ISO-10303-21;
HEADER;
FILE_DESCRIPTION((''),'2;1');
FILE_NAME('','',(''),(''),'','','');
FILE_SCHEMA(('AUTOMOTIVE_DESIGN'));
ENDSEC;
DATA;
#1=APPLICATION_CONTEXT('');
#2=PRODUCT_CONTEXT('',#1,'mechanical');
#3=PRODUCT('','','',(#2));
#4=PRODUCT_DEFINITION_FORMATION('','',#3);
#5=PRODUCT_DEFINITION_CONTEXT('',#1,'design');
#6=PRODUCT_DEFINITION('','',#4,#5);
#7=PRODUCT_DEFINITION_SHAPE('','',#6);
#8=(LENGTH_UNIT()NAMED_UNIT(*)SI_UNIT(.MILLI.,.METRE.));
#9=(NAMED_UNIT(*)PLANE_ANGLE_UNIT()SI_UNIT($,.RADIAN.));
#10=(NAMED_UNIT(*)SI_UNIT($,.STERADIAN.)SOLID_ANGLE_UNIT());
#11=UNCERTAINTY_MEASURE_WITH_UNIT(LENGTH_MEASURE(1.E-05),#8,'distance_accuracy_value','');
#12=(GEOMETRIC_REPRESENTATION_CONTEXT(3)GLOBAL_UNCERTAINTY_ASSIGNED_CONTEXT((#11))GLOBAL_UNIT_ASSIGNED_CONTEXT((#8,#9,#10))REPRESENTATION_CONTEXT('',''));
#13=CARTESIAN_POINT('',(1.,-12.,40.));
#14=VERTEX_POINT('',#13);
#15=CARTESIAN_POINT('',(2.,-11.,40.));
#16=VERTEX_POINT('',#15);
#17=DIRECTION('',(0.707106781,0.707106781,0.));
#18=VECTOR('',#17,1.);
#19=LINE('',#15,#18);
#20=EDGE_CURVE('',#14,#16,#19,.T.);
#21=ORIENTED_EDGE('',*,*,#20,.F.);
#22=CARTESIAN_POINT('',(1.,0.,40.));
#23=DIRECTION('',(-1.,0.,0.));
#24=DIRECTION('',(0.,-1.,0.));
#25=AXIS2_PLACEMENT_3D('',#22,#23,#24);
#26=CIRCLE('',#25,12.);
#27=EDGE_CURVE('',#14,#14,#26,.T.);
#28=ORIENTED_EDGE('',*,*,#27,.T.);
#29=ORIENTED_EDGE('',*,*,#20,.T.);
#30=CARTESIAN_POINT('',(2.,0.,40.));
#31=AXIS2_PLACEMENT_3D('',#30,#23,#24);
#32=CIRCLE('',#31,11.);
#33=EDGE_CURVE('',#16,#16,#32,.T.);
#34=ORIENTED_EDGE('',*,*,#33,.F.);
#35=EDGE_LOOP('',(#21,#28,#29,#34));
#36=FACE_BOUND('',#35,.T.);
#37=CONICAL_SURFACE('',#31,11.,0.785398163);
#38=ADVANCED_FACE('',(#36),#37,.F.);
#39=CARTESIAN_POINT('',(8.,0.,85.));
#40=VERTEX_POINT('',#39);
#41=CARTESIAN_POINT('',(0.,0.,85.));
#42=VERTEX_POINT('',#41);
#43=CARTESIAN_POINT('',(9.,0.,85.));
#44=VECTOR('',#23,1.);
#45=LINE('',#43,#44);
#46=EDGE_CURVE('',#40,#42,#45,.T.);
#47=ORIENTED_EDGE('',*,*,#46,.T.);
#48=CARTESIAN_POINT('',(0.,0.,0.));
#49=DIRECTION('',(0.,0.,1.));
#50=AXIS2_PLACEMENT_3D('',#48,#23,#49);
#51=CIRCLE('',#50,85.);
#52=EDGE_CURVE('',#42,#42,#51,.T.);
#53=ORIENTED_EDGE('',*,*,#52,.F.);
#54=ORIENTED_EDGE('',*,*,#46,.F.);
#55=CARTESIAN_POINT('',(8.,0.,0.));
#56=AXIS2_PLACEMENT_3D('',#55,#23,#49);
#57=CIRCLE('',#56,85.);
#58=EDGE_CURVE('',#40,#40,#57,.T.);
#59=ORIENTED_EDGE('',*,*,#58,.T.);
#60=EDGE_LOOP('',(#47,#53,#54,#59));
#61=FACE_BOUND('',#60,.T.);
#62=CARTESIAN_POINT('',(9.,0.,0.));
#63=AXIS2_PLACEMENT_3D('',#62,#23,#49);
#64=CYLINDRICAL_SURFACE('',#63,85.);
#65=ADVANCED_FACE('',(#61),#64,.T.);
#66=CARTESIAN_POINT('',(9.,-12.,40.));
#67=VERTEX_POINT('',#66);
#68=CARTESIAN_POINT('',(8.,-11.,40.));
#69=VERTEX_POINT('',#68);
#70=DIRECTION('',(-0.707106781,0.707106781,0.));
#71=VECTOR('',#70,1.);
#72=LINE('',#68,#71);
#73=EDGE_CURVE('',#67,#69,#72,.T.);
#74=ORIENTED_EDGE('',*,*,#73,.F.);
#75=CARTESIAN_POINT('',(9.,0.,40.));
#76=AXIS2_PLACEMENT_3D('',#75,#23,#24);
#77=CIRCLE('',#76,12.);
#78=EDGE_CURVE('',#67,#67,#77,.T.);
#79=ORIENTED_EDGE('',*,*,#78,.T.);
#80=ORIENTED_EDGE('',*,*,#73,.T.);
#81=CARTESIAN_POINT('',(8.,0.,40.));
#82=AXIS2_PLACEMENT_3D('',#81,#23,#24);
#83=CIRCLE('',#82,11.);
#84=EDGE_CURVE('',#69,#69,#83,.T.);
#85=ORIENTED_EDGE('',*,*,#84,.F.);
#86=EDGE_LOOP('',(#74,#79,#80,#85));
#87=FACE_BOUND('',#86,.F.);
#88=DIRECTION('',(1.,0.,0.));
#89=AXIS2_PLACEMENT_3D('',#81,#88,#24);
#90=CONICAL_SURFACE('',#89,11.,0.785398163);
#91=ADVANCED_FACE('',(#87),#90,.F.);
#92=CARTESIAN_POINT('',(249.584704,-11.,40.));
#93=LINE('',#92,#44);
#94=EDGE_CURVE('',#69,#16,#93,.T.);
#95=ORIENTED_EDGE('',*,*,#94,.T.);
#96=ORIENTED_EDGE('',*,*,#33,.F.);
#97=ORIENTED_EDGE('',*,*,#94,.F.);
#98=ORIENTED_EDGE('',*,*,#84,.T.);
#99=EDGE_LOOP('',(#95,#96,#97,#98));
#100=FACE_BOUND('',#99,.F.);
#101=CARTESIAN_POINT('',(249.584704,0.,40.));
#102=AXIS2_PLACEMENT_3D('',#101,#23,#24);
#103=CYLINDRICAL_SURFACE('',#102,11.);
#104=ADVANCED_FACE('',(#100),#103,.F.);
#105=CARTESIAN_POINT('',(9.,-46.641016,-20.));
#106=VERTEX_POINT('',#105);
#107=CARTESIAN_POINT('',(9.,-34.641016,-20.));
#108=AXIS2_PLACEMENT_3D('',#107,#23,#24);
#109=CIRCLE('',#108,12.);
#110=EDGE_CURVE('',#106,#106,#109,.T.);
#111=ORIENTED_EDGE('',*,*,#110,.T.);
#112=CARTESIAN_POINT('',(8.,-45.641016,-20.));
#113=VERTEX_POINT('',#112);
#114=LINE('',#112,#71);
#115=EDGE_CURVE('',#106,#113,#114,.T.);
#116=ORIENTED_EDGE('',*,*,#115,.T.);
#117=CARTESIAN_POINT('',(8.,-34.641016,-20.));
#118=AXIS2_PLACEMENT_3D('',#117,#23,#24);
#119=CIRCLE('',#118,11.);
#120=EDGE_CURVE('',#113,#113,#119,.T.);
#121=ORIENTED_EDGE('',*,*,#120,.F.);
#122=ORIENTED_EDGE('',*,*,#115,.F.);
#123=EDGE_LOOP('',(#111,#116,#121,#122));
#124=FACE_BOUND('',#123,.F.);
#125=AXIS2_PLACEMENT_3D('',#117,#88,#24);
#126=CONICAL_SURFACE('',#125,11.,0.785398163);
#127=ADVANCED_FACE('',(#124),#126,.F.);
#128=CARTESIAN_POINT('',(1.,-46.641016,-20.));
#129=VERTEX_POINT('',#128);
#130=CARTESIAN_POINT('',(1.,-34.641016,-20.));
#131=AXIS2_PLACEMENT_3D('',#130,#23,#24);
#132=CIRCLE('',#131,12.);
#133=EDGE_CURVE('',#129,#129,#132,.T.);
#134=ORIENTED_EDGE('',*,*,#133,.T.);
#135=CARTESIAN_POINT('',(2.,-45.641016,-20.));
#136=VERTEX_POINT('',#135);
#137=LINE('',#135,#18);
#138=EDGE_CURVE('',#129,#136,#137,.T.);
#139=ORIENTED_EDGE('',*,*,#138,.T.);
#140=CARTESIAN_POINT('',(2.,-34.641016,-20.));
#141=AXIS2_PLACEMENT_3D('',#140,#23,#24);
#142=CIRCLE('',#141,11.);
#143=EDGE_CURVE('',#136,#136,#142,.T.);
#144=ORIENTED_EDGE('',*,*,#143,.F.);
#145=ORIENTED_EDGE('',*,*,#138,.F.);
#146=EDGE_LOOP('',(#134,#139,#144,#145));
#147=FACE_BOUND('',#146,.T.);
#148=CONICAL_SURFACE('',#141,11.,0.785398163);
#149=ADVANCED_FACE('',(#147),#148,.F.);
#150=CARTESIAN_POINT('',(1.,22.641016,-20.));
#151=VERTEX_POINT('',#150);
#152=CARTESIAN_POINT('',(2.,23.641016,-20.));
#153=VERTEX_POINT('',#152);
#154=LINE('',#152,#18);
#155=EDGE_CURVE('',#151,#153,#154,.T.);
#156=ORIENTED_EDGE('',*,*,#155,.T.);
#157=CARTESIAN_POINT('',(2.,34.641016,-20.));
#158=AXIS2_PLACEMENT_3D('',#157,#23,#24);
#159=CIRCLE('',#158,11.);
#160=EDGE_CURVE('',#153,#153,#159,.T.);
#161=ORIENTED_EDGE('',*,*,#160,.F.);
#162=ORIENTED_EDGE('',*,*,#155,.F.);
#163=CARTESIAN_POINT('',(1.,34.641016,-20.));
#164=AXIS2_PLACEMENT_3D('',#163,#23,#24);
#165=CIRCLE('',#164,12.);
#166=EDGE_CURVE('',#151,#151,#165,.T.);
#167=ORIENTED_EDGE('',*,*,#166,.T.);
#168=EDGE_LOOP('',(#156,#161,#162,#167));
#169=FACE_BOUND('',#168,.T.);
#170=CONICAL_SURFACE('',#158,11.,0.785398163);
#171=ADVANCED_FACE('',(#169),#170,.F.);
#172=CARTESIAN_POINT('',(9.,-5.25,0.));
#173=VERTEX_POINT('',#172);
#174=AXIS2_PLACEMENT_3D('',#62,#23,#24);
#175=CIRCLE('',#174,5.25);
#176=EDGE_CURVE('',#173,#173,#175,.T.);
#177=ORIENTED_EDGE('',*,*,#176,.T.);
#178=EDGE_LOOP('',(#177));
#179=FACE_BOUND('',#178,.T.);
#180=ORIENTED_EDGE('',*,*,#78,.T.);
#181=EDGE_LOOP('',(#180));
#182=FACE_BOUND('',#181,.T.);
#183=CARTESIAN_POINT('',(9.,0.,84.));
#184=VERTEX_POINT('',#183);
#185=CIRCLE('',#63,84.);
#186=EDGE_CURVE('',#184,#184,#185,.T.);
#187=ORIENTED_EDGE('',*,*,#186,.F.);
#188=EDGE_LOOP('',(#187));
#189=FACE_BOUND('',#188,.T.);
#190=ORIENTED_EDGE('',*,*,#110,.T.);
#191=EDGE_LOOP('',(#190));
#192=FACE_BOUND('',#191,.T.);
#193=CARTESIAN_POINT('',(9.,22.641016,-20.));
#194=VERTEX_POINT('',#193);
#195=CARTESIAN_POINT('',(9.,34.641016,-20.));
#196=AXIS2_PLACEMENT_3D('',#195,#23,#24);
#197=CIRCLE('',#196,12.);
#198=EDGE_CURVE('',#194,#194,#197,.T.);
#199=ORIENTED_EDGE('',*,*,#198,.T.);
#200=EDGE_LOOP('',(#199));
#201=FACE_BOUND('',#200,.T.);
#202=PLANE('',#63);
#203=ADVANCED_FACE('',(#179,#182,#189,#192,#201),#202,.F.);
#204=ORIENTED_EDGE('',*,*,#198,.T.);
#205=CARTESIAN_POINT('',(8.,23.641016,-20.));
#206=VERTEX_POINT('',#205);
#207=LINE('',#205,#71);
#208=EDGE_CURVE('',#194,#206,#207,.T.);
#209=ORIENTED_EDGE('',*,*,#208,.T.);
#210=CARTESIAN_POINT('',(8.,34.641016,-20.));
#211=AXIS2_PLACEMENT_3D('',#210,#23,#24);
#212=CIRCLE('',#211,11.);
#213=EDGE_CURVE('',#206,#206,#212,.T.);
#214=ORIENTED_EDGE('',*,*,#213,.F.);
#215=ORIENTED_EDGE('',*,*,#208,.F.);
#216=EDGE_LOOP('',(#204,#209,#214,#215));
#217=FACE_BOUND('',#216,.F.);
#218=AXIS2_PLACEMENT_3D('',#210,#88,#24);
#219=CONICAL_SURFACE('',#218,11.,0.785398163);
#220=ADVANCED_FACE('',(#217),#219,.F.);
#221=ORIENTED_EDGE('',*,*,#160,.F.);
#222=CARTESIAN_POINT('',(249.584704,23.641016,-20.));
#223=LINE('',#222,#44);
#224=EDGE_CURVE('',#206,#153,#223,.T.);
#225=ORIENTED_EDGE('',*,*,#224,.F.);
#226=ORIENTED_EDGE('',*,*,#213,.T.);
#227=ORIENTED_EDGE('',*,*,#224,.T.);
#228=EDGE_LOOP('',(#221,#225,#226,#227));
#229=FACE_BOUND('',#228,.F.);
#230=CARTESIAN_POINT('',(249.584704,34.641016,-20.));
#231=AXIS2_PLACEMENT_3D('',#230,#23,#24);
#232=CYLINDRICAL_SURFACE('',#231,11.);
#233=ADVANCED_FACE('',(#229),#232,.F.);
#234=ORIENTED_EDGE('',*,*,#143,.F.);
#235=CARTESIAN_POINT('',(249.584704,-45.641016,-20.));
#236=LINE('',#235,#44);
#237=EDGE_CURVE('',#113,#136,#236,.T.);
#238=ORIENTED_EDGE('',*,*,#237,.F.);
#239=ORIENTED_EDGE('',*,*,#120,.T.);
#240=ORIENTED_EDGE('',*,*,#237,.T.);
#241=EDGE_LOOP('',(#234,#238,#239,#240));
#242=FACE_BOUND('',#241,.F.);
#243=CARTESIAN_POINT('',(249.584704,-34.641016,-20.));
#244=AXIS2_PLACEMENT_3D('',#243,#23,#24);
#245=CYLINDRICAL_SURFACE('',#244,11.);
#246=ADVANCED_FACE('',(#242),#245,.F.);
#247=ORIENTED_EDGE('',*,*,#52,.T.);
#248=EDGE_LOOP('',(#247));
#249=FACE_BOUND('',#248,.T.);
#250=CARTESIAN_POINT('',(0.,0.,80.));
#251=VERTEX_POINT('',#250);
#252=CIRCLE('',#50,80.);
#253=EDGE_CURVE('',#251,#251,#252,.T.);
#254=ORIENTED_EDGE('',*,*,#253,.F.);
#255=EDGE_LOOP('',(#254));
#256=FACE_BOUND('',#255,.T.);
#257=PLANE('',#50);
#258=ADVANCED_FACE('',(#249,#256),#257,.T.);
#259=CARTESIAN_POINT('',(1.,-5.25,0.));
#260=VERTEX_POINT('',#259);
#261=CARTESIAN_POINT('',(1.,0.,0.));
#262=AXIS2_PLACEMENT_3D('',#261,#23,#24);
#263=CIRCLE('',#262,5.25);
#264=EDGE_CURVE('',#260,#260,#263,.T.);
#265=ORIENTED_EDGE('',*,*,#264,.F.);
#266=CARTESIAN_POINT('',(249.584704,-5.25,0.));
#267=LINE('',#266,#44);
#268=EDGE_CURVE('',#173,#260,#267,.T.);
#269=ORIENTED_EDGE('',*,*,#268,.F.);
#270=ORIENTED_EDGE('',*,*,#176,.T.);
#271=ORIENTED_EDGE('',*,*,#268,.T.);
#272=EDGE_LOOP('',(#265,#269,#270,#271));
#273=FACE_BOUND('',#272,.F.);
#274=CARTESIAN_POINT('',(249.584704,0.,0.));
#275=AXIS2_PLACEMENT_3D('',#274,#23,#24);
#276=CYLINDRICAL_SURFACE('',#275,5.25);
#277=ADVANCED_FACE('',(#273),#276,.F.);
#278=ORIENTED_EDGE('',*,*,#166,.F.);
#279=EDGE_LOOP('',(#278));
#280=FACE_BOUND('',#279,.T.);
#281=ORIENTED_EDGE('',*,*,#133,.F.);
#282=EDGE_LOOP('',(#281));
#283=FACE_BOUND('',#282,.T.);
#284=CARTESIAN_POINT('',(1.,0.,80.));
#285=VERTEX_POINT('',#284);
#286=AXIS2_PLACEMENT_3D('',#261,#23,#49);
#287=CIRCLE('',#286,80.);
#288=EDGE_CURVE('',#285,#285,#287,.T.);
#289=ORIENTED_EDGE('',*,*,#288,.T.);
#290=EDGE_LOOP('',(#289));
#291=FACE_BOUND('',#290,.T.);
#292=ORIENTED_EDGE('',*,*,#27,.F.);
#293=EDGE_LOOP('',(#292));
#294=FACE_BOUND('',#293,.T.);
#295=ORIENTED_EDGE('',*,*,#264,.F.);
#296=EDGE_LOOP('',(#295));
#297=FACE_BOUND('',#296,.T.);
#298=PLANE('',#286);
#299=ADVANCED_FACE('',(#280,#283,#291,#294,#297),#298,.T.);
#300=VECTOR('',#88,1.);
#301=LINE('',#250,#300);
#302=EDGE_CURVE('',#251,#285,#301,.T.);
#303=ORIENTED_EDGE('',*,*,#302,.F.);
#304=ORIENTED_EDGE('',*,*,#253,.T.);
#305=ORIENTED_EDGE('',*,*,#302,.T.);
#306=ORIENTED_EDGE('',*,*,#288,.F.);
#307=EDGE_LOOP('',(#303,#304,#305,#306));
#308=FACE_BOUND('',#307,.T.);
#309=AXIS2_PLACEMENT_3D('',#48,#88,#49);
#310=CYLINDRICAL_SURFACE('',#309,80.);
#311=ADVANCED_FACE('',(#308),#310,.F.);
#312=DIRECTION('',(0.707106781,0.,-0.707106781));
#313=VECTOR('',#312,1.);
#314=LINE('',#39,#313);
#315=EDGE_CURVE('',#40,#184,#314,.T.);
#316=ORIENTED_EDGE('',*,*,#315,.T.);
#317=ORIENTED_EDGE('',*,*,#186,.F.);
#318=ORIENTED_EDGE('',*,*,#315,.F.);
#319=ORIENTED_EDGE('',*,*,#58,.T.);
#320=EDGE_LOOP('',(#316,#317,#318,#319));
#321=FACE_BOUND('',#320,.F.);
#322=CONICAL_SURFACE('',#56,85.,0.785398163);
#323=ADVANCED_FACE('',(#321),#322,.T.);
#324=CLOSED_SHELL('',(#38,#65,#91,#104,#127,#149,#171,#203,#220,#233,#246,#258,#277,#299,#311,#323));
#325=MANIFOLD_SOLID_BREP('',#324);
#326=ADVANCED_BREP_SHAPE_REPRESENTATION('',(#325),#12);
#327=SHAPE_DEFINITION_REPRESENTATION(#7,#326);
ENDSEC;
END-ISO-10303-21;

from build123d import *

# Parameters (mm, degrees)
F3_D    = 10.5
F5_D    = 22
F6_SIZE = 1


with BuildPart() as f1:
    # F0 (on Front) → F1 (revolve)
    with BuildSketch(Plane.XZ):
        Polygon((0, 85), (0, 80), (1, 80), (1, 0), (9, 0), (9, 85), align=None)
    revolve(axis=Axis((5, 0, 0), (-1, 0, 0)))

    # F3 (through all)
    with Locations(Plane.YZ.offset(9)):
        with Locations((0, 0)):
            Hole(F3_D / 2)

    # F5 (through all)
    with Locations(Plane.YZ.offset(9)):
        with Locations((0, 40), (34.6410161514, -20), (-34.6410161514, -20)):
            Hole(F5_D / 2)

    # F6
    f6_edges = [f1.edges().sort_by_distance(p)[0] for p in [
        (9, 0, -85),
        (9, -45.641016, -20),
        (9, -11, 40),
        (9, 23.641016, -20),
        (1, -45.641016, -20),
        (1, 23.641016, -20),
        (1, -11, 40),
    ]]
    chamfer(f6_edges, length=F6_SIZE)


solid = f1.part
